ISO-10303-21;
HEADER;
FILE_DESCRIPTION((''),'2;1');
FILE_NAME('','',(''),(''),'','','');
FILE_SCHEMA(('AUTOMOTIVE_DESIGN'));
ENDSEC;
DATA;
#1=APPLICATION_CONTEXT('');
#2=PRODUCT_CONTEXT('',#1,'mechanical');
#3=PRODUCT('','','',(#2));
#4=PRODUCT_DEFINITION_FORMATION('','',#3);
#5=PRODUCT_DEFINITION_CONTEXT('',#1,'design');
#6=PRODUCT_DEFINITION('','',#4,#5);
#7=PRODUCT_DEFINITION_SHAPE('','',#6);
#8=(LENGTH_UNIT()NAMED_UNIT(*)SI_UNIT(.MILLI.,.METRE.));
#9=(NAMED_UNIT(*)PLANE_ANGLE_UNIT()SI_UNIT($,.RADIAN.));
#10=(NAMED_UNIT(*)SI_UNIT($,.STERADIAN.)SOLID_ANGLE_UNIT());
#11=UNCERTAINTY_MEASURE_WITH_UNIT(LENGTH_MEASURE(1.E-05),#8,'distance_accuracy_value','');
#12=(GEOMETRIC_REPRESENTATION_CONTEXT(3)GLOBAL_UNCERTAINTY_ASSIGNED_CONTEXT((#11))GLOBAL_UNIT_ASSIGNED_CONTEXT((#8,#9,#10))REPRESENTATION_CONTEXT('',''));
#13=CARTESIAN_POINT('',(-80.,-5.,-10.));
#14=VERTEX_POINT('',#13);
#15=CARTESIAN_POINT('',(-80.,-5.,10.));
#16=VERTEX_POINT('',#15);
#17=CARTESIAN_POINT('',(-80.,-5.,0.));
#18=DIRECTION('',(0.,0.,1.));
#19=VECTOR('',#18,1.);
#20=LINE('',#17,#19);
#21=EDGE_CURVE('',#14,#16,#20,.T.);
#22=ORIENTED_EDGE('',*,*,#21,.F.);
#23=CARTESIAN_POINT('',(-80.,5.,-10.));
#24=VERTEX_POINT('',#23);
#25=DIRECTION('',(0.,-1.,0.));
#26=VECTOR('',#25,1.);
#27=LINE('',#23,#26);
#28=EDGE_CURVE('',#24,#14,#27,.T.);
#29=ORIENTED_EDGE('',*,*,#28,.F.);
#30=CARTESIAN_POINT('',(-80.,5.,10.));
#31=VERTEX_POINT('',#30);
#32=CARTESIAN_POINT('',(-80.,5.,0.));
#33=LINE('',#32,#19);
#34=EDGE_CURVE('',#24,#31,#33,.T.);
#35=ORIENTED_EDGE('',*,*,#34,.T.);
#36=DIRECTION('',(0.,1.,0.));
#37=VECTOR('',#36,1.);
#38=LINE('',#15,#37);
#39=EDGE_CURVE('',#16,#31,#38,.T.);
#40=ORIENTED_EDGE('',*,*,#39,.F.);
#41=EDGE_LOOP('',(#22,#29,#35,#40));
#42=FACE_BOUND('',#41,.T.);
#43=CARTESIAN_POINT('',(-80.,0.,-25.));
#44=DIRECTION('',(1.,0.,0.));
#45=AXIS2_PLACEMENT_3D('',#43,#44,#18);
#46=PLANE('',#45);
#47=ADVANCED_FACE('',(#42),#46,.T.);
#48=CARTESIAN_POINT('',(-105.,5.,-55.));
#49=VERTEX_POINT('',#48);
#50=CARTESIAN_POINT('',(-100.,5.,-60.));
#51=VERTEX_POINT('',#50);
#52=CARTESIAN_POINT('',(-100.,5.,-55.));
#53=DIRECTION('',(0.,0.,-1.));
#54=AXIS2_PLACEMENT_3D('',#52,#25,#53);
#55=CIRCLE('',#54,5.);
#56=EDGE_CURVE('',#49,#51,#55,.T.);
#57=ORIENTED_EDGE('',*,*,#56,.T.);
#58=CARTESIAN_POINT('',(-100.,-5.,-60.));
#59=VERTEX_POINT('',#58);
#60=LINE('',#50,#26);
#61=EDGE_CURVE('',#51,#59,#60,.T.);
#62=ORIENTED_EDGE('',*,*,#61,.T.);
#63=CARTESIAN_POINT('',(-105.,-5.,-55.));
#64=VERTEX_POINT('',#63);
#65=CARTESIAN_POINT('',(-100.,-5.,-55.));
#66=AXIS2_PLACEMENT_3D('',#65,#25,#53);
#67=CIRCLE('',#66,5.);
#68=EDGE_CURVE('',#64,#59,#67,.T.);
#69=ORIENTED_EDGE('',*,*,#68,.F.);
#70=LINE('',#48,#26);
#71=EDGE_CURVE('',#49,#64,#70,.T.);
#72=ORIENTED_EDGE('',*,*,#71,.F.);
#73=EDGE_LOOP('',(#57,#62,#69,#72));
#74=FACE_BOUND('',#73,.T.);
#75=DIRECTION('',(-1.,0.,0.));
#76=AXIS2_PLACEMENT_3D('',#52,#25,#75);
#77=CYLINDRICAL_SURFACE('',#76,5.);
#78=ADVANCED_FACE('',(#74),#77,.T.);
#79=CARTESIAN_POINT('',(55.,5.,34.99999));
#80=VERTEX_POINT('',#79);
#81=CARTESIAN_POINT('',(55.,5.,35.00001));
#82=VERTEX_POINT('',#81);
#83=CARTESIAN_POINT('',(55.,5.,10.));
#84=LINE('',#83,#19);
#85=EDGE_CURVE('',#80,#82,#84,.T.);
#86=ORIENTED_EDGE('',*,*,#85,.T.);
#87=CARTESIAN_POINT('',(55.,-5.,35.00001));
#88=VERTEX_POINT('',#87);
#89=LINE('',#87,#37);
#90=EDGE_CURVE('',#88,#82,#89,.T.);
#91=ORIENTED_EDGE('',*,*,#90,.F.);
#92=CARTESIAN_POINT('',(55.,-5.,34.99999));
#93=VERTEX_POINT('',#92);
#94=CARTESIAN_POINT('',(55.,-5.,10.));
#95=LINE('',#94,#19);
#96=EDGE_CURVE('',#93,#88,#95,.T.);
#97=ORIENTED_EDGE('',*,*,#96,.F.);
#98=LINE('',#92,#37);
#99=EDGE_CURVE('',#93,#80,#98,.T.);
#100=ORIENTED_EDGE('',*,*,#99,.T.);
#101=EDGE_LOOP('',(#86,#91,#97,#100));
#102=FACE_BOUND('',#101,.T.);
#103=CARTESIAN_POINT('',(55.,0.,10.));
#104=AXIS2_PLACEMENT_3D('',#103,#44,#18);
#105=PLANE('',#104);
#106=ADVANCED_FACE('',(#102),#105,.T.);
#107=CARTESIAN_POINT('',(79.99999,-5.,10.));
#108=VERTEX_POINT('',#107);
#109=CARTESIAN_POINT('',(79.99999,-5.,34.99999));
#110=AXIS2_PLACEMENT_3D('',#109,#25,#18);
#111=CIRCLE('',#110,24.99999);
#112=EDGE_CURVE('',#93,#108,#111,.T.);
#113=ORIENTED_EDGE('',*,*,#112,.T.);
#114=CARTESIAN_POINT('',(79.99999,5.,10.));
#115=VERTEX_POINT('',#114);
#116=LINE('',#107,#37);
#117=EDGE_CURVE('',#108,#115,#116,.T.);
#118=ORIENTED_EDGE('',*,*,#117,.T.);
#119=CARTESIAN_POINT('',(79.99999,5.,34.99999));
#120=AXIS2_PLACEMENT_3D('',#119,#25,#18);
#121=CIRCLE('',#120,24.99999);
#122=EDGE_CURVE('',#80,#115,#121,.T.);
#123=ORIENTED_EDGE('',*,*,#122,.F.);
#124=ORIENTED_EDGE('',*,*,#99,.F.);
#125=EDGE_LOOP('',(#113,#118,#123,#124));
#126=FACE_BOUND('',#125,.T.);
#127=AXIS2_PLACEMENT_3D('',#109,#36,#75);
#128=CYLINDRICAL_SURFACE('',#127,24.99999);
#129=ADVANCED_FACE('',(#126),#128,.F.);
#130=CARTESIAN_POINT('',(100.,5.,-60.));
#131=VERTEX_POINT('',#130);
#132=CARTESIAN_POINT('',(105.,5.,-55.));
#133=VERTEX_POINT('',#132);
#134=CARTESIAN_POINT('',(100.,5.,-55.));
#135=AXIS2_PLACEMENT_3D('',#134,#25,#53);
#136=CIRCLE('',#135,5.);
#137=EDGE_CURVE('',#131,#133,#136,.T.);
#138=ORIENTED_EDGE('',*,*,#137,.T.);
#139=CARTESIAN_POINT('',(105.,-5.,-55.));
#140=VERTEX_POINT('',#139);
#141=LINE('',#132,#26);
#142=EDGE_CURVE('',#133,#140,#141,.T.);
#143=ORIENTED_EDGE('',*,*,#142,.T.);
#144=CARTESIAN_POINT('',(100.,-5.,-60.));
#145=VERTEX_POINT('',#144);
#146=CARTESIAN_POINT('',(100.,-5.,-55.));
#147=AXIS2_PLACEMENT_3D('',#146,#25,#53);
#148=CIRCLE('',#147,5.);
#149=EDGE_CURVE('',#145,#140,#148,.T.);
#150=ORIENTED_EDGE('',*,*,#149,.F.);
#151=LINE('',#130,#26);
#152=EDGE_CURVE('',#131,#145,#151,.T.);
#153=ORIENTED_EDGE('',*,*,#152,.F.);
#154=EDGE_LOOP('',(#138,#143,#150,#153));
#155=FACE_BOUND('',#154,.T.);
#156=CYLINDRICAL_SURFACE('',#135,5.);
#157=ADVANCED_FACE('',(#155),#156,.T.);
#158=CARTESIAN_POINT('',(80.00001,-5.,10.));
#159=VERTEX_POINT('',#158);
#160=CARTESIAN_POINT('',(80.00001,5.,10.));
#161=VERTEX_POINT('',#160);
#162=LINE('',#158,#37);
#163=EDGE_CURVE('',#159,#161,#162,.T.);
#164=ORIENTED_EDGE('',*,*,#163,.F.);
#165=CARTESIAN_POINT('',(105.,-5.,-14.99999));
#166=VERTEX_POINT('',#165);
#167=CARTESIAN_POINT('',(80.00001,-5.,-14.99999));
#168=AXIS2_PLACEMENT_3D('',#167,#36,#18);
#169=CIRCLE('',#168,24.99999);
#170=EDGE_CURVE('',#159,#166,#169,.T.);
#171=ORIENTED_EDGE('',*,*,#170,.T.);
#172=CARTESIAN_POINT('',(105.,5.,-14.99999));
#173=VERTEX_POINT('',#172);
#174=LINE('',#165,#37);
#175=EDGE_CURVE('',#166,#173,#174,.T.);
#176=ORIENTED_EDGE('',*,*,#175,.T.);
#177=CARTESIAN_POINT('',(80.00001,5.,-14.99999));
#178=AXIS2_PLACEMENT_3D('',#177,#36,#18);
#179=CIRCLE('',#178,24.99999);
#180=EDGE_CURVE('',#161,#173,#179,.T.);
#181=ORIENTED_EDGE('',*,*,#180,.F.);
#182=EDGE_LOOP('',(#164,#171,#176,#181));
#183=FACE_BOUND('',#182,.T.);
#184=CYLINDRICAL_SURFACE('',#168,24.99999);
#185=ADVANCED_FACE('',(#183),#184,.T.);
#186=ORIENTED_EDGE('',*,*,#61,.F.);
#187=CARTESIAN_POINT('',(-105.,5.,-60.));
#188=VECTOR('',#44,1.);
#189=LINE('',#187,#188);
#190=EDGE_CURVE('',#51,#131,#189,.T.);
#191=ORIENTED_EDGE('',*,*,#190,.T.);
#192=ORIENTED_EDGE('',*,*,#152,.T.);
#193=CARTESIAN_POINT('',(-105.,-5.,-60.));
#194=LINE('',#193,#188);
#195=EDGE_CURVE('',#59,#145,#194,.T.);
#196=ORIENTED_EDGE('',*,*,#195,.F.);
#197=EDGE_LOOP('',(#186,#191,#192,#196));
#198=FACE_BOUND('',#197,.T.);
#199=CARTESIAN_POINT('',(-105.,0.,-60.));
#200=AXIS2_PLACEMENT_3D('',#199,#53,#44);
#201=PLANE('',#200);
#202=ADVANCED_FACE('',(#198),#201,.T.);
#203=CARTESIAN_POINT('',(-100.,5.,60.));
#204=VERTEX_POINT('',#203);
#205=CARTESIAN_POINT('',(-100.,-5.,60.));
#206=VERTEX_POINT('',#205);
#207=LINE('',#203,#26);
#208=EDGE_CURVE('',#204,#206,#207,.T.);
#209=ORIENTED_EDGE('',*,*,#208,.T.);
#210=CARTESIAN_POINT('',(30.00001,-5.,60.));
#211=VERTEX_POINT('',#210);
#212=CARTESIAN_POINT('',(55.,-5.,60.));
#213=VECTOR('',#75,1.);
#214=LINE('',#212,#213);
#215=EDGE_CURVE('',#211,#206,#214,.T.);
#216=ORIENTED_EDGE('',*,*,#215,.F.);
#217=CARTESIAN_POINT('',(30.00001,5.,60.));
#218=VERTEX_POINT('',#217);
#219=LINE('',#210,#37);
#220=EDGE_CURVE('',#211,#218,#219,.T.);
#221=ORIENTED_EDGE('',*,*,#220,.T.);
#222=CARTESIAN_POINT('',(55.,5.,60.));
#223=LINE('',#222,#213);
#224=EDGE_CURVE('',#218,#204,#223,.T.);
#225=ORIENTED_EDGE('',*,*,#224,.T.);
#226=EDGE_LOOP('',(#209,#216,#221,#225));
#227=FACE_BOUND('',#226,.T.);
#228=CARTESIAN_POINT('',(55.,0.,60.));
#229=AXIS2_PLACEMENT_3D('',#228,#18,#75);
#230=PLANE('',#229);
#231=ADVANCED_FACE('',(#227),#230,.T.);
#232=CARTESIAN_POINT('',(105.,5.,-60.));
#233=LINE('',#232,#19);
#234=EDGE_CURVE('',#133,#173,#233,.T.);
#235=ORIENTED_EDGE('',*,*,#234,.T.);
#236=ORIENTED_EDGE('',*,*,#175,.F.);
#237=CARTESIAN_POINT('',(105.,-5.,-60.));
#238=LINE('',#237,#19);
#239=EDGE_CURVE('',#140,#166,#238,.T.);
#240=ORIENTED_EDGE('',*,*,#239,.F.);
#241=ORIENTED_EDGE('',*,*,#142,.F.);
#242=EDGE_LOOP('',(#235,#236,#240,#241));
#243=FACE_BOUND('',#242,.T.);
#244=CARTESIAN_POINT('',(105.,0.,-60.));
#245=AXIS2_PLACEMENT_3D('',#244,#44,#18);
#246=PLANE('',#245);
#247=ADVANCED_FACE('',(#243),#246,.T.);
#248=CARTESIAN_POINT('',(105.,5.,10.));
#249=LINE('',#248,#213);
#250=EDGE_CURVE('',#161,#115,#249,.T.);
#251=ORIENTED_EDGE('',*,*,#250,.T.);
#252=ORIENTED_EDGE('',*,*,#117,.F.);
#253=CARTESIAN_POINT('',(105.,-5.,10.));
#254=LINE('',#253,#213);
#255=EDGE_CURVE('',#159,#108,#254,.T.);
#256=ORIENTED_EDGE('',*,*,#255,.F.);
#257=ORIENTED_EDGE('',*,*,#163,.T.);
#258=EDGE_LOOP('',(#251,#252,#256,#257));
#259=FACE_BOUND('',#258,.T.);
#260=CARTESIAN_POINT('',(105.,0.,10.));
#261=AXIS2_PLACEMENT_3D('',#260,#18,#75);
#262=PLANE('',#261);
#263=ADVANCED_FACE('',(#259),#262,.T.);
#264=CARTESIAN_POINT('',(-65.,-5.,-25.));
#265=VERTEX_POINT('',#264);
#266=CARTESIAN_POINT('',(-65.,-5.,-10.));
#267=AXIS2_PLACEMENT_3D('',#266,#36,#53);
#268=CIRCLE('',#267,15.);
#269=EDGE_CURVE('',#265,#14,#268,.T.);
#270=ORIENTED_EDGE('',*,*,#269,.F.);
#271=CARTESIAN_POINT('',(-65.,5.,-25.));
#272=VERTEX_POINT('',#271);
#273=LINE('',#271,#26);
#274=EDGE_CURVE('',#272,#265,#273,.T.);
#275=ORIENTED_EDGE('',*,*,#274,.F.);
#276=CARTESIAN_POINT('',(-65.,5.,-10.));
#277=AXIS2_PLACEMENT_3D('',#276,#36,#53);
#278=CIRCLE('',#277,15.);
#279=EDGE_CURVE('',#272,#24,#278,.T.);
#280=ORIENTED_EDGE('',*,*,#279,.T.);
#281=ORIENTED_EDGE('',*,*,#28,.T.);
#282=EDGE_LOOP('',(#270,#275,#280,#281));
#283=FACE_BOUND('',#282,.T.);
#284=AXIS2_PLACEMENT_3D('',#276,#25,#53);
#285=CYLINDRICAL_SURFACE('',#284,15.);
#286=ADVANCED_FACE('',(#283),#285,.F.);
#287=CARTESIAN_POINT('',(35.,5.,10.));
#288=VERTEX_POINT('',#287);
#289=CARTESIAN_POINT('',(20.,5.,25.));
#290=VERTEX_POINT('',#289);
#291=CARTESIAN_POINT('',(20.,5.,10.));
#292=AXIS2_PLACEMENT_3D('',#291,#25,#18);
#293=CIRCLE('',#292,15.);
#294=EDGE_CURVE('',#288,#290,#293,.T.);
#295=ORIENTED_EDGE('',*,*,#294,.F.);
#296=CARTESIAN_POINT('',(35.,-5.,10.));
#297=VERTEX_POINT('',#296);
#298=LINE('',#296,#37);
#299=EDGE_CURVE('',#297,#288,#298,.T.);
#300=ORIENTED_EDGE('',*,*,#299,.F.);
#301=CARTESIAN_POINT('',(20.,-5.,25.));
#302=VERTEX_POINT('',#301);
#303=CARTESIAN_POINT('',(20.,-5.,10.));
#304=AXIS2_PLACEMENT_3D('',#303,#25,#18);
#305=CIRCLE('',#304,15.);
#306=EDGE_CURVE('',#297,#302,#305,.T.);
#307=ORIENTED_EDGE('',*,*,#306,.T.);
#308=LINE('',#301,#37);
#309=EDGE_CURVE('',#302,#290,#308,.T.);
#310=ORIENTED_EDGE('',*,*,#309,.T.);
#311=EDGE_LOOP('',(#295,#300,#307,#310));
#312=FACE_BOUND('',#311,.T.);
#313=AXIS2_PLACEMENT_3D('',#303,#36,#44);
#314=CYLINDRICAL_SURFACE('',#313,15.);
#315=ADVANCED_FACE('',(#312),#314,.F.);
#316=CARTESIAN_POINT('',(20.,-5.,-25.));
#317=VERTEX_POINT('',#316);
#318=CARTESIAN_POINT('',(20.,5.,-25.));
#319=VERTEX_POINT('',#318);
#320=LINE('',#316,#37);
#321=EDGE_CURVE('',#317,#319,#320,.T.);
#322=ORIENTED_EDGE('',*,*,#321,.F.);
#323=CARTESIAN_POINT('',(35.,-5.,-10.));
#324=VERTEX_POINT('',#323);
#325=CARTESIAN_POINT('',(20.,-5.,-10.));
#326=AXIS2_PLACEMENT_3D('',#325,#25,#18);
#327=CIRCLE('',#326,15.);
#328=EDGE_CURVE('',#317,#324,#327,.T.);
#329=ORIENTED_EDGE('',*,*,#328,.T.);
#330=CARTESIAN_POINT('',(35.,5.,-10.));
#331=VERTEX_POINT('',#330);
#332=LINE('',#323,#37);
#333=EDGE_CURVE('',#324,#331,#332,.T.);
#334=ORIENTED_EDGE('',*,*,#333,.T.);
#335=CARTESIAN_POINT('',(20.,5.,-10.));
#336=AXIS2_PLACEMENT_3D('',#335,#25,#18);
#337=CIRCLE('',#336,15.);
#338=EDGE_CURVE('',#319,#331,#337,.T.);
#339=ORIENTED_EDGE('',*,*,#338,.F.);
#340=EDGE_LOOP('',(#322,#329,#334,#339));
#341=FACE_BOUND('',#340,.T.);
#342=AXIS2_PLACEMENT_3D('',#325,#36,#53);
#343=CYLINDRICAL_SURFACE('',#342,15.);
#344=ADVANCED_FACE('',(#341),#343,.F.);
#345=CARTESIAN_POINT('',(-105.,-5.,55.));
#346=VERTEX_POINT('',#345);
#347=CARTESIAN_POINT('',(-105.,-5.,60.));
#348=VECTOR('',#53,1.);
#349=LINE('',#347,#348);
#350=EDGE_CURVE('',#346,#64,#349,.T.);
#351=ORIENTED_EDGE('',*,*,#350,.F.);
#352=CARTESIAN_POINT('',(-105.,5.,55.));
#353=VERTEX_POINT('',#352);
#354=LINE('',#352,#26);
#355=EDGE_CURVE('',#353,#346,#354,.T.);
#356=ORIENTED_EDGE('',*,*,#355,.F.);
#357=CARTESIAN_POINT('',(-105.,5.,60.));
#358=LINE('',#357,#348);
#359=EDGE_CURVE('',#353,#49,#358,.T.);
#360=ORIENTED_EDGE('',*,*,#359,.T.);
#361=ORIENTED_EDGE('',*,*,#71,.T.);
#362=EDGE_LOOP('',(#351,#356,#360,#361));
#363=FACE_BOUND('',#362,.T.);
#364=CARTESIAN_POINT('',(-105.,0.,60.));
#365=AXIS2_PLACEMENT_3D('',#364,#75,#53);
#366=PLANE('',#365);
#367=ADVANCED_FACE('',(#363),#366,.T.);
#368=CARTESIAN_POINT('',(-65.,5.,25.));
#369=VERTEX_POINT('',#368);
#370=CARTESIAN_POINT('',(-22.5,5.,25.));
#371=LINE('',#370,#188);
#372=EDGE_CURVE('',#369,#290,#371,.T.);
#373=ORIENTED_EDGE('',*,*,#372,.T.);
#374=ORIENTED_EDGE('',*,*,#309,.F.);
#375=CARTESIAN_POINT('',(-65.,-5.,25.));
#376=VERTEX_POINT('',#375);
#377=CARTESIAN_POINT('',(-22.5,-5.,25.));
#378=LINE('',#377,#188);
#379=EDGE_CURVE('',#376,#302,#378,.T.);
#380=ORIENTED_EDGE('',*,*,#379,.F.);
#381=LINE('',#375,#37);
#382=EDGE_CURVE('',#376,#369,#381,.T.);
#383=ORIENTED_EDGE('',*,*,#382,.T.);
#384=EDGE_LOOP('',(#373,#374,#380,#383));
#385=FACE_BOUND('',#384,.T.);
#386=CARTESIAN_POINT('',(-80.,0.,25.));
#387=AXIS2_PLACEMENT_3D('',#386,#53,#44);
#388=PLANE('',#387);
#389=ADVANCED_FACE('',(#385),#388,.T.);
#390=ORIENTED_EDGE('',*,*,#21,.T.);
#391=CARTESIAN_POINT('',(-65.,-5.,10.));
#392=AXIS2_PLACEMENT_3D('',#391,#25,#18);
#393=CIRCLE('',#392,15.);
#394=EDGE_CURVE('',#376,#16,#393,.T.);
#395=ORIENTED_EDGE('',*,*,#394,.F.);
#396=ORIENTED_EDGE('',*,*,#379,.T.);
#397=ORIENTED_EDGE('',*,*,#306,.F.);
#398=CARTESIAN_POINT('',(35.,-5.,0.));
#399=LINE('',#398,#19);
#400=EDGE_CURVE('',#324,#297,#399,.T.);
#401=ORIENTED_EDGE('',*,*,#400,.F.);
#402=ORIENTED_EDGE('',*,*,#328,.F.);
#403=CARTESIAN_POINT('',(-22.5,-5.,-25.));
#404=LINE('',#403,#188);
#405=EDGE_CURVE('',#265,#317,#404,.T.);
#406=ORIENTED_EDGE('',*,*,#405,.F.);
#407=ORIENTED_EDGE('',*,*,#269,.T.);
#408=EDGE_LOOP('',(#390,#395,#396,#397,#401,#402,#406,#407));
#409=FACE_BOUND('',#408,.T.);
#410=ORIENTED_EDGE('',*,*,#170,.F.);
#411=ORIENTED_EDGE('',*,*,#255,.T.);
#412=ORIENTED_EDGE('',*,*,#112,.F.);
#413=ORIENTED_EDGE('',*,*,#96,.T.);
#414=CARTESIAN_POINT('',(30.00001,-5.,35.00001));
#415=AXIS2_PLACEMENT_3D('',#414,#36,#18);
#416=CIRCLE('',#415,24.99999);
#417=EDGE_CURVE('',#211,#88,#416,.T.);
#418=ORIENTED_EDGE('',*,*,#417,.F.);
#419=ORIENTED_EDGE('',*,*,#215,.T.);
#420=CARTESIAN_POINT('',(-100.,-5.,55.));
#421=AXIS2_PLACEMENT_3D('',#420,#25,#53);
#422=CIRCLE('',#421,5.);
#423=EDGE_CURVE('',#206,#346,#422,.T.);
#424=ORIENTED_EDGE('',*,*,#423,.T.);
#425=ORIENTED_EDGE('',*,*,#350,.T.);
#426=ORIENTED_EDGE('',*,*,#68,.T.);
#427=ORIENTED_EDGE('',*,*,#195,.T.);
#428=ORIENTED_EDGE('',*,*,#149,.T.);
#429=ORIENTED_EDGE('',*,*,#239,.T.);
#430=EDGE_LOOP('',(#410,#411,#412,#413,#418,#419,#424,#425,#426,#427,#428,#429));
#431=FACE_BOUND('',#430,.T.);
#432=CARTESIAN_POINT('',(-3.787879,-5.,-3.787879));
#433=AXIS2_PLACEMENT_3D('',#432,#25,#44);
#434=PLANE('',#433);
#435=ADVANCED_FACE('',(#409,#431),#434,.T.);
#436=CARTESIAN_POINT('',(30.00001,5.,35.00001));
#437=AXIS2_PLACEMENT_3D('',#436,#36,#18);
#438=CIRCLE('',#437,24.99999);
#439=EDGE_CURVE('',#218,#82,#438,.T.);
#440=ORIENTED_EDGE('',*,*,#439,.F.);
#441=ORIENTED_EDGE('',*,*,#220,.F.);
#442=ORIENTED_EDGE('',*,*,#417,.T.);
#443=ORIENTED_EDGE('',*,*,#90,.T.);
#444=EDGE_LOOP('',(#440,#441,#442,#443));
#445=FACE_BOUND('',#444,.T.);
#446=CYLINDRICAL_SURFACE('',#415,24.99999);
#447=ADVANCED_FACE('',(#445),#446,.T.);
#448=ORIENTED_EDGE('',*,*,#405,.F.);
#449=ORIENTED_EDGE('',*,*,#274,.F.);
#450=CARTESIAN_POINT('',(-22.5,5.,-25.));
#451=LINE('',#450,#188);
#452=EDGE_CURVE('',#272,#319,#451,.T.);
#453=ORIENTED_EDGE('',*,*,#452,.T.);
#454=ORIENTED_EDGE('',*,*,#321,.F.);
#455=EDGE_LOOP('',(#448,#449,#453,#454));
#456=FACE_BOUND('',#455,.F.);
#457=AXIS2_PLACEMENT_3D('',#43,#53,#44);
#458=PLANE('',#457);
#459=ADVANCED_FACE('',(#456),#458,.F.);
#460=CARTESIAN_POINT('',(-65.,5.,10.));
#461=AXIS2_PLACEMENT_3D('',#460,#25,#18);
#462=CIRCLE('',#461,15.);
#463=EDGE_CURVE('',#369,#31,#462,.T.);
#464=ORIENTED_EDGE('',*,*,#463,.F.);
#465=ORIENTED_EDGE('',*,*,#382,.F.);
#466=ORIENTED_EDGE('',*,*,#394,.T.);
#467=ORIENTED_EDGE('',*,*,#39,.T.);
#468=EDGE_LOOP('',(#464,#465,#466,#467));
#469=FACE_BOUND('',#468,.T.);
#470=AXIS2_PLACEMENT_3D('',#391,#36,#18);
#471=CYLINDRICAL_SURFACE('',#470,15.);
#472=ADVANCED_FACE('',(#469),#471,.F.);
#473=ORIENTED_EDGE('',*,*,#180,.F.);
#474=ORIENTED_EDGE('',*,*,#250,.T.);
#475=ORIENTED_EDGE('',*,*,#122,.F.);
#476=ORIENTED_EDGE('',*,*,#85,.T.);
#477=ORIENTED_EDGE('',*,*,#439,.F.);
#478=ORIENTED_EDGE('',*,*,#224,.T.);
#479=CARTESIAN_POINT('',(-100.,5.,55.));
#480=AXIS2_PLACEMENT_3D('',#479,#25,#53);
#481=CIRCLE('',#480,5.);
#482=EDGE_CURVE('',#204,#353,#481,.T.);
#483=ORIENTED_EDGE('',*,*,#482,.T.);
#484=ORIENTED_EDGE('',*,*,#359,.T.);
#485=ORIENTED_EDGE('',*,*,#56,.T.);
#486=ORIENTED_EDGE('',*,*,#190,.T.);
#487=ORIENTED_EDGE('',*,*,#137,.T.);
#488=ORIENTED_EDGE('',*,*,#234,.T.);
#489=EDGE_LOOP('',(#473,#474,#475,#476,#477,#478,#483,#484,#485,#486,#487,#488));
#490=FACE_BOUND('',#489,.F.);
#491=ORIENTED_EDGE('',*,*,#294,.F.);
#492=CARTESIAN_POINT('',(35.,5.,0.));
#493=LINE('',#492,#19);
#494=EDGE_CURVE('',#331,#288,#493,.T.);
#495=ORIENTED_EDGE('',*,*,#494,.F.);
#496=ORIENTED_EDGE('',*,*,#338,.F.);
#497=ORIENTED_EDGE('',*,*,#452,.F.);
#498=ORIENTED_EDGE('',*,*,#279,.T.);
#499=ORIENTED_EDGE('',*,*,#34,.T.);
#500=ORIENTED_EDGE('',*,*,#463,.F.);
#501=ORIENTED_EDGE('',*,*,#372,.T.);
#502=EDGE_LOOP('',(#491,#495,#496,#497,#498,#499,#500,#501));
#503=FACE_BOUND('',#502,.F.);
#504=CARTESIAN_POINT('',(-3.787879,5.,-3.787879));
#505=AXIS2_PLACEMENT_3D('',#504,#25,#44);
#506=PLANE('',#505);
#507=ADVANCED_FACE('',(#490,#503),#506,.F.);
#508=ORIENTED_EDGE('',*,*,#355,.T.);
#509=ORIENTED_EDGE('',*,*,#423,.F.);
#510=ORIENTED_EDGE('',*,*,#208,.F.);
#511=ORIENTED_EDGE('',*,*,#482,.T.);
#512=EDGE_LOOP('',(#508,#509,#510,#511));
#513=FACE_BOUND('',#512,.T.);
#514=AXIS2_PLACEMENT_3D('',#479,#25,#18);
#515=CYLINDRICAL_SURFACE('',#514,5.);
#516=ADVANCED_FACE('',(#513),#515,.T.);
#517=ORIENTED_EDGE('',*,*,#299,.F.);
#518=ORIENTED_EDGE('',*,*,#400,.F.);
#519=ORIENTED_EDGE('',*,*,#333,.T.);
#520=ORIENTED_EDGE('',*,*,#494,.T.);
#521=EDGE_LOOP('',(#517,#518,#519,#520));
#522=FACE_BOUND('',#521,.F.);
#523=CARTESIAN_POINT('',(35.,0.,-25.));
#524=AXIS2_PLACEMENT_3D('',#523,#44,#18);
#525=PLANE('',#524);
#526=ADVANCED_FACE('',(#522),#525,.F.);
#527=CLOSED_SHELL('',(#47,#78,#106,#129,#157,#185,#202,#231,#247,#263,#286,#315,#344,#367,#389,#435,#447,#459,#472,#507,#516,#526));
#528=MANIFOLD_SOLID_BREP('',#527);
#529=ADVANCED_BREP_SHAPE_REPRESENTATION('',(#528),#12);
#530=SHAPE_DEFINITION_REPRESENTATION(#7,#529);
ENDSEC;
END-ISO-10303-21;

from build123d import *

# Parameters (mm, degrees)
F0_W     = 115
F0_H     = 50
F1_DEPTH = 5
F2_R     = 24.99999
F3_R     = 5
F4_R     = 15


# Not quite as in the source:
# - a fillet or chamfer is up to 0.001 mm smaller than in the source, because OpenCascade refuses the exact size


with BuildPart() as f1:
    # F0 (on Front) → F1 (new body, symmetric)
    with BuildSketch(Plane.XZ):
        Polygon((55, 60), (-105, 60), (-105, -60), (105, -60), (105, 10), (55, 10), align=None)
        with Locations((-22.5, 0)):
            Rectangle(F0_W, F0_H, mode=Mode.SUBTRACT)
    extrude(amount=F1_DEPTH, both=True)

    # F2 (radius 25 in the source; OpenCascade refuses exactly that, so slightly less here)
    f2_edges = [f1.edges().sort_by_distance(p)[0] for p in [
        (55, 0, 10),
        (105, 0, 10),
        (55, 0, 60),
    ]]
    fillet(f2_edges, radius=F2_R)

    # F3
    f3_edges = [f1.edges().sort_by_distance(p)[0] for p in [
        (105, 0, -60),
        (-105, 0, -60),
        (-105, 0, 60),
    ]]
    fillet(f3_edges, radius=F3_R)

    # F4
    f4_edges = [f1.edges().sort_by_distance(p)[0] for p in [
        (-80, 0, -25),
        (35, 0, -25),
        (35, 0, 25),
        (-80, 0, 25),
    ]]
    fillet(f4_edges, radius=F4_R)


solid = f1.part
